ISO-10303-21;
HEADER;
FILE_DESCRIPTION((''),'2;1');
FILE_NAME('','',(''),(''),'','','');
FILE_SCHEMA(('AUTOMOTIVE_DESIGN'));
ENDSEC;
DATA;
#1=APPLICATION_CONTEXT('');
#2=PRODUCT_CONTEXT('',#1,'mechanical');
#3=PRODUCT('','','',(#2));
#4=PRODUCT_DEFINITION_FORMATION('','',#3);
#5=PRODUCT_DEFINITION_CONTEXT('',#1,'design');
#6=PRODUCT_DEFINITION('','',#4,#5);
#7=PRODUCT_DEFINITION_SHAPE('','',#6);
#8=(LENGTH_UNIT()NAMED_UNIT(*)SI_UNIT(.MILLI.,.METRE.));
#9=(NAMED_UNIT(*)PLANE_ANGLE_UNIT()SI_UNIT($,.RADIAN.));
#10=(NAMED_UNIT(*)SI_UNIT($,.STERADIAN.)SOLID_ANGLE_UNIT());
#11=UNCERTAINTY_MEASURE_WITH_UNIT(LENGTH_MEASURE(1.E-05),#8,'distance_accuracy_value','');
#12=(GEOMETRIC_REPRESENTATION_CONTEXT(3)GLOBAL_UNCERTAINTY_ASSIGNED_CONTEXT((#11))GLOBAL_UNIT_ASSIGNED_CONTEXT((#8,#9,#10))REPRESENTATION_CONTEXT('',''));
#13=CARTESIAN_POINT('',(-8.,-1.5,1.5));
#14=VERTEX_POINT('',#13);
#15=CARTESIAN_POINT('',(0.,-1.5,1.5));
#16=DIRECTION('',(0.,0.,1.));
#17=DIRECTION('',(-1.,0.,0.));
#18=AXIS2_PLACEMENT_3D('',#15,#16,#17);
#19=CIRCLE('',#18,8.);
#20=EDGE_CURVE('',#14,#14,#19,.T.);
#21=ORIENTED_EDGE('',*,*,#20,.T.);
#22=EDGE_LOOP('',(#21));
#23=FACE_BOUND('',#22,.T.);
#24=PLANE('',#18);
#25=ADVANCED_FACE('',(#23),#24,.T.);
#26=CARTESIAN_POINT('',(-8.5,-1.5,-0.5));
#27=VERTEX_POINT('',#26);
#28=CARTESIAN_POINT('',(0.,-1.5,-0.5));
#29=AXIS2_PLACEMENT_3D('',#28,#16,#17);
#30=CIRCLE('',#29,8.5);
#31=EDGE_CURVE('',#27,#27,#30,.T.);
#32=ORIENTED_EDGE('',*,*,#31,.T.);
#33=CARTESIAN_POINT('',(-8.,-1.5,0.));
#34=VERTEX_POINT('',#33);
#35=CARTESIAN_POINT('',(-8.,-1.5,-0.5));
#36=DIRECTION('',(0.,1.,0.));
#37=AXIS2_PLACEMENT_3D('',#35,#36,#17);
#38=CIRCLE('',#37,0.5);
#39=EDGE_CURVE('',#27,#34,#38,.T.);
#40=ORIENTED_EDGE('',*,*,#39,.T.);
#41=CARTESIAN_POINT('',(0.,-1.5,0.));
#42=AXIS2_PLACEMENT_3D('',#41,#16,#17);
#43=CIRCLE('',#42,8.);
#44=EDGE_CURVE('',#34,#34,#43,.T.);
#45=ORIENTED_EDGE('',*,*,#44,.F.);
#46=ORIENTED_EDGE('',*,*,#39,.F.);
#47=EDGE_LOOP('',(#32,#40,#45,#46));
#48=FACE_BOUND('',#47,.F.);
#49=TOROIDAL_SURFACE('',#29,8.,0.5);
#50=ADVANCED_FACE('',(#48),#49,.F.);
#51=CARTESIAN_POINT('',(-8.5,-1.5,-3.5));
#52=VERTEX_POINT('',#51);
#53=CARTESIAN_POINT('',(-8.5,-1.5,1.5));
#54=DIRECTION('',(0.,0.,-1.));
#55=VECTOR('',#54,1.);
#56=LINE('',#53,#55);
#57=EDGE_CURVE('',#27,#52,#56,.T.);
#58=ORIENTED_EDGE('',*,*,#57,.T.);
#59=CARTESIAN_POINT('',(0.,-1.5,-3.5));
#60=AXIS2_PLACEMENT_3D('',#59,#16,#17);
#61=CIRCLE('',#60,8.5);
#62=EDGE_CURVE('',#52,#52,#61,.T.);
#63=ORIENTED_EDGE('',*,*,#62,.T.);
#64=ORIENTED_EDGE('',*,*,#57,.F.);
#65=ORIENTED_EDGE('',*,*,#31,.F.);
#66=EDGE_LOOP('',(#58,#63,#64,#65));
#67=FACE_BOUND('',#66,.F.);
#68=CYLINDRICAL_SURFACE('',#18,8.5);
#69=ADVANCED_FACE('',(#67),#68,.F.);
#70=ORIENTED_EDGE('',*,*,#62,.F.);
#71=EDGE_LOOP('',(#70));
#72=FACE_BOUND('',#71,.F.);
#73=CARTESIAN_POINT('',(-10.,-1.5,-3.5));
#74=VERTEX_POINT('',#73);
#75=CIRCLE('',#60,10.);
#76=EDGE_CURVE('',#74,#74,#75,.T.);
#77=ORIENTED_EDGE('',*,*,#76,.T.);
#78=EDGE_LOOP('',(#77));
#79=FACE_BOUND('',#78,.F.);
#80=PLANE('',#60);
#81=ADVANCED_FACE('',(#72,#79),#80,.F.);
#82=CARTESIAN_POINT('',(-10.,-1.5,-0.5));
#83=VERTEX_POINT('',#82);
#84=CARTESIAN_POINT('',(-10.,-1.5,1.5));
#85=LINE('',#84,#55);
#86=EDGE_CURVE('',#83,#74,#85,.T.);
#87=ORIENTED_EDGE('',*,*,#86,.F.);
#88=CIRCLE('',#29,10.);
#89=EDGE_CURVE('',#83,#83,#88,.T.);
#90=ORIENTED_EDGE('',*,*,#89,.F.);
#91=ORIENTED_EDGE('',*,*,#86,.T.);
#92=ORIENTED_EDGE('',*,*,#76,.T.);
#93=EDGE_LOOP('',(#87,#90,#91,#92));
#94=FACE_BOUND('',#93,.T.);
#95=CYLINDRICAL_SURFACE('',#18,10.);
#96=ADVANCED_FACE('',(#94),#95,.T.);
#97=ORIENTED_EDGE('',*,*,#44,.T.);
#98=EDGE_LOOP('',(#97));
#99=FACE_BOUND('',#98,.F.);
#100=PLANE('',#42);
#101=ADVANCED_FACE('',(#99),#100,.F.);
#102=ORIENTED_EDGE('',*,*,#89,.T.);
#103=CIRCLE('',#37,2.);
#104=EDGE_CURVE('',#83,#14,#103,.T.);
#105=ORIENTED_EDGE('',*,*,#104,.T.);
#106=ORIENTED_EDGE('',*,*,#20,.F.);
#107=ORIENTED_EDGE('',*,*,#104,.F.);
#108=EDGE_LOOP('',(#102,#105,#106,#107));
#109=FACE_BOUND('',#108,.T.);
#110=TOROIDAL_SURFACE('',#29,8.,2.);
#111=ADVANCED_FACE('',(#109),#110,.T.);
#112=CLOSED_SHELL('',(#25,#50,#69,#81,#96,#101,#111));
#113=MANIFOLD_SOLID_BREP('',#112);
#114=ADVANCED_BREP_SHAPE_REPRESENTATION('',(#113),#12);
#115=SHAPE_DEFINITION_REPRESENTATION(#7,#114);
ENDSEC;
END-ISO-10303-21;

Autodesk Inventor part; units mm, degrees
ref_plane "YZ Plane" through (0, 0, 0) normal (1, 0, 0) x (0, 1, 0)
ref_plane "XZ Plane" through (0, 0, 0) normal (0, 1, 0) x (-1, 0, 0)
ref_plane "XY Plane" through (0, 0, 0) normal (0, 0, 1) x (1, 0, 0)
sketch "草图1" plane through (0, 0, 0) normal (0, 1, 0) x (-1, 0, 0)
  circle A0 centre (0, 0) radius 10
  dimension "d0" = 20
extrude "拉伸1" add sketch "草图1" against normal blind 5
fillet "圆角1" radius 2 1 edges at (10, 0, 0)
shell "抽壳1" thickness 1.5 removed faces 1 at (1.182, -5, 3.1167)
move or copy body "旋转1" bodies to move or copy 1 copy no rotation origin (0, 0, 0) rotation axis (1, 0, 0) rotation angle 90 translate (0, -1.5, 1.5)
properties part number "Buttonx20" material "玻璃"
